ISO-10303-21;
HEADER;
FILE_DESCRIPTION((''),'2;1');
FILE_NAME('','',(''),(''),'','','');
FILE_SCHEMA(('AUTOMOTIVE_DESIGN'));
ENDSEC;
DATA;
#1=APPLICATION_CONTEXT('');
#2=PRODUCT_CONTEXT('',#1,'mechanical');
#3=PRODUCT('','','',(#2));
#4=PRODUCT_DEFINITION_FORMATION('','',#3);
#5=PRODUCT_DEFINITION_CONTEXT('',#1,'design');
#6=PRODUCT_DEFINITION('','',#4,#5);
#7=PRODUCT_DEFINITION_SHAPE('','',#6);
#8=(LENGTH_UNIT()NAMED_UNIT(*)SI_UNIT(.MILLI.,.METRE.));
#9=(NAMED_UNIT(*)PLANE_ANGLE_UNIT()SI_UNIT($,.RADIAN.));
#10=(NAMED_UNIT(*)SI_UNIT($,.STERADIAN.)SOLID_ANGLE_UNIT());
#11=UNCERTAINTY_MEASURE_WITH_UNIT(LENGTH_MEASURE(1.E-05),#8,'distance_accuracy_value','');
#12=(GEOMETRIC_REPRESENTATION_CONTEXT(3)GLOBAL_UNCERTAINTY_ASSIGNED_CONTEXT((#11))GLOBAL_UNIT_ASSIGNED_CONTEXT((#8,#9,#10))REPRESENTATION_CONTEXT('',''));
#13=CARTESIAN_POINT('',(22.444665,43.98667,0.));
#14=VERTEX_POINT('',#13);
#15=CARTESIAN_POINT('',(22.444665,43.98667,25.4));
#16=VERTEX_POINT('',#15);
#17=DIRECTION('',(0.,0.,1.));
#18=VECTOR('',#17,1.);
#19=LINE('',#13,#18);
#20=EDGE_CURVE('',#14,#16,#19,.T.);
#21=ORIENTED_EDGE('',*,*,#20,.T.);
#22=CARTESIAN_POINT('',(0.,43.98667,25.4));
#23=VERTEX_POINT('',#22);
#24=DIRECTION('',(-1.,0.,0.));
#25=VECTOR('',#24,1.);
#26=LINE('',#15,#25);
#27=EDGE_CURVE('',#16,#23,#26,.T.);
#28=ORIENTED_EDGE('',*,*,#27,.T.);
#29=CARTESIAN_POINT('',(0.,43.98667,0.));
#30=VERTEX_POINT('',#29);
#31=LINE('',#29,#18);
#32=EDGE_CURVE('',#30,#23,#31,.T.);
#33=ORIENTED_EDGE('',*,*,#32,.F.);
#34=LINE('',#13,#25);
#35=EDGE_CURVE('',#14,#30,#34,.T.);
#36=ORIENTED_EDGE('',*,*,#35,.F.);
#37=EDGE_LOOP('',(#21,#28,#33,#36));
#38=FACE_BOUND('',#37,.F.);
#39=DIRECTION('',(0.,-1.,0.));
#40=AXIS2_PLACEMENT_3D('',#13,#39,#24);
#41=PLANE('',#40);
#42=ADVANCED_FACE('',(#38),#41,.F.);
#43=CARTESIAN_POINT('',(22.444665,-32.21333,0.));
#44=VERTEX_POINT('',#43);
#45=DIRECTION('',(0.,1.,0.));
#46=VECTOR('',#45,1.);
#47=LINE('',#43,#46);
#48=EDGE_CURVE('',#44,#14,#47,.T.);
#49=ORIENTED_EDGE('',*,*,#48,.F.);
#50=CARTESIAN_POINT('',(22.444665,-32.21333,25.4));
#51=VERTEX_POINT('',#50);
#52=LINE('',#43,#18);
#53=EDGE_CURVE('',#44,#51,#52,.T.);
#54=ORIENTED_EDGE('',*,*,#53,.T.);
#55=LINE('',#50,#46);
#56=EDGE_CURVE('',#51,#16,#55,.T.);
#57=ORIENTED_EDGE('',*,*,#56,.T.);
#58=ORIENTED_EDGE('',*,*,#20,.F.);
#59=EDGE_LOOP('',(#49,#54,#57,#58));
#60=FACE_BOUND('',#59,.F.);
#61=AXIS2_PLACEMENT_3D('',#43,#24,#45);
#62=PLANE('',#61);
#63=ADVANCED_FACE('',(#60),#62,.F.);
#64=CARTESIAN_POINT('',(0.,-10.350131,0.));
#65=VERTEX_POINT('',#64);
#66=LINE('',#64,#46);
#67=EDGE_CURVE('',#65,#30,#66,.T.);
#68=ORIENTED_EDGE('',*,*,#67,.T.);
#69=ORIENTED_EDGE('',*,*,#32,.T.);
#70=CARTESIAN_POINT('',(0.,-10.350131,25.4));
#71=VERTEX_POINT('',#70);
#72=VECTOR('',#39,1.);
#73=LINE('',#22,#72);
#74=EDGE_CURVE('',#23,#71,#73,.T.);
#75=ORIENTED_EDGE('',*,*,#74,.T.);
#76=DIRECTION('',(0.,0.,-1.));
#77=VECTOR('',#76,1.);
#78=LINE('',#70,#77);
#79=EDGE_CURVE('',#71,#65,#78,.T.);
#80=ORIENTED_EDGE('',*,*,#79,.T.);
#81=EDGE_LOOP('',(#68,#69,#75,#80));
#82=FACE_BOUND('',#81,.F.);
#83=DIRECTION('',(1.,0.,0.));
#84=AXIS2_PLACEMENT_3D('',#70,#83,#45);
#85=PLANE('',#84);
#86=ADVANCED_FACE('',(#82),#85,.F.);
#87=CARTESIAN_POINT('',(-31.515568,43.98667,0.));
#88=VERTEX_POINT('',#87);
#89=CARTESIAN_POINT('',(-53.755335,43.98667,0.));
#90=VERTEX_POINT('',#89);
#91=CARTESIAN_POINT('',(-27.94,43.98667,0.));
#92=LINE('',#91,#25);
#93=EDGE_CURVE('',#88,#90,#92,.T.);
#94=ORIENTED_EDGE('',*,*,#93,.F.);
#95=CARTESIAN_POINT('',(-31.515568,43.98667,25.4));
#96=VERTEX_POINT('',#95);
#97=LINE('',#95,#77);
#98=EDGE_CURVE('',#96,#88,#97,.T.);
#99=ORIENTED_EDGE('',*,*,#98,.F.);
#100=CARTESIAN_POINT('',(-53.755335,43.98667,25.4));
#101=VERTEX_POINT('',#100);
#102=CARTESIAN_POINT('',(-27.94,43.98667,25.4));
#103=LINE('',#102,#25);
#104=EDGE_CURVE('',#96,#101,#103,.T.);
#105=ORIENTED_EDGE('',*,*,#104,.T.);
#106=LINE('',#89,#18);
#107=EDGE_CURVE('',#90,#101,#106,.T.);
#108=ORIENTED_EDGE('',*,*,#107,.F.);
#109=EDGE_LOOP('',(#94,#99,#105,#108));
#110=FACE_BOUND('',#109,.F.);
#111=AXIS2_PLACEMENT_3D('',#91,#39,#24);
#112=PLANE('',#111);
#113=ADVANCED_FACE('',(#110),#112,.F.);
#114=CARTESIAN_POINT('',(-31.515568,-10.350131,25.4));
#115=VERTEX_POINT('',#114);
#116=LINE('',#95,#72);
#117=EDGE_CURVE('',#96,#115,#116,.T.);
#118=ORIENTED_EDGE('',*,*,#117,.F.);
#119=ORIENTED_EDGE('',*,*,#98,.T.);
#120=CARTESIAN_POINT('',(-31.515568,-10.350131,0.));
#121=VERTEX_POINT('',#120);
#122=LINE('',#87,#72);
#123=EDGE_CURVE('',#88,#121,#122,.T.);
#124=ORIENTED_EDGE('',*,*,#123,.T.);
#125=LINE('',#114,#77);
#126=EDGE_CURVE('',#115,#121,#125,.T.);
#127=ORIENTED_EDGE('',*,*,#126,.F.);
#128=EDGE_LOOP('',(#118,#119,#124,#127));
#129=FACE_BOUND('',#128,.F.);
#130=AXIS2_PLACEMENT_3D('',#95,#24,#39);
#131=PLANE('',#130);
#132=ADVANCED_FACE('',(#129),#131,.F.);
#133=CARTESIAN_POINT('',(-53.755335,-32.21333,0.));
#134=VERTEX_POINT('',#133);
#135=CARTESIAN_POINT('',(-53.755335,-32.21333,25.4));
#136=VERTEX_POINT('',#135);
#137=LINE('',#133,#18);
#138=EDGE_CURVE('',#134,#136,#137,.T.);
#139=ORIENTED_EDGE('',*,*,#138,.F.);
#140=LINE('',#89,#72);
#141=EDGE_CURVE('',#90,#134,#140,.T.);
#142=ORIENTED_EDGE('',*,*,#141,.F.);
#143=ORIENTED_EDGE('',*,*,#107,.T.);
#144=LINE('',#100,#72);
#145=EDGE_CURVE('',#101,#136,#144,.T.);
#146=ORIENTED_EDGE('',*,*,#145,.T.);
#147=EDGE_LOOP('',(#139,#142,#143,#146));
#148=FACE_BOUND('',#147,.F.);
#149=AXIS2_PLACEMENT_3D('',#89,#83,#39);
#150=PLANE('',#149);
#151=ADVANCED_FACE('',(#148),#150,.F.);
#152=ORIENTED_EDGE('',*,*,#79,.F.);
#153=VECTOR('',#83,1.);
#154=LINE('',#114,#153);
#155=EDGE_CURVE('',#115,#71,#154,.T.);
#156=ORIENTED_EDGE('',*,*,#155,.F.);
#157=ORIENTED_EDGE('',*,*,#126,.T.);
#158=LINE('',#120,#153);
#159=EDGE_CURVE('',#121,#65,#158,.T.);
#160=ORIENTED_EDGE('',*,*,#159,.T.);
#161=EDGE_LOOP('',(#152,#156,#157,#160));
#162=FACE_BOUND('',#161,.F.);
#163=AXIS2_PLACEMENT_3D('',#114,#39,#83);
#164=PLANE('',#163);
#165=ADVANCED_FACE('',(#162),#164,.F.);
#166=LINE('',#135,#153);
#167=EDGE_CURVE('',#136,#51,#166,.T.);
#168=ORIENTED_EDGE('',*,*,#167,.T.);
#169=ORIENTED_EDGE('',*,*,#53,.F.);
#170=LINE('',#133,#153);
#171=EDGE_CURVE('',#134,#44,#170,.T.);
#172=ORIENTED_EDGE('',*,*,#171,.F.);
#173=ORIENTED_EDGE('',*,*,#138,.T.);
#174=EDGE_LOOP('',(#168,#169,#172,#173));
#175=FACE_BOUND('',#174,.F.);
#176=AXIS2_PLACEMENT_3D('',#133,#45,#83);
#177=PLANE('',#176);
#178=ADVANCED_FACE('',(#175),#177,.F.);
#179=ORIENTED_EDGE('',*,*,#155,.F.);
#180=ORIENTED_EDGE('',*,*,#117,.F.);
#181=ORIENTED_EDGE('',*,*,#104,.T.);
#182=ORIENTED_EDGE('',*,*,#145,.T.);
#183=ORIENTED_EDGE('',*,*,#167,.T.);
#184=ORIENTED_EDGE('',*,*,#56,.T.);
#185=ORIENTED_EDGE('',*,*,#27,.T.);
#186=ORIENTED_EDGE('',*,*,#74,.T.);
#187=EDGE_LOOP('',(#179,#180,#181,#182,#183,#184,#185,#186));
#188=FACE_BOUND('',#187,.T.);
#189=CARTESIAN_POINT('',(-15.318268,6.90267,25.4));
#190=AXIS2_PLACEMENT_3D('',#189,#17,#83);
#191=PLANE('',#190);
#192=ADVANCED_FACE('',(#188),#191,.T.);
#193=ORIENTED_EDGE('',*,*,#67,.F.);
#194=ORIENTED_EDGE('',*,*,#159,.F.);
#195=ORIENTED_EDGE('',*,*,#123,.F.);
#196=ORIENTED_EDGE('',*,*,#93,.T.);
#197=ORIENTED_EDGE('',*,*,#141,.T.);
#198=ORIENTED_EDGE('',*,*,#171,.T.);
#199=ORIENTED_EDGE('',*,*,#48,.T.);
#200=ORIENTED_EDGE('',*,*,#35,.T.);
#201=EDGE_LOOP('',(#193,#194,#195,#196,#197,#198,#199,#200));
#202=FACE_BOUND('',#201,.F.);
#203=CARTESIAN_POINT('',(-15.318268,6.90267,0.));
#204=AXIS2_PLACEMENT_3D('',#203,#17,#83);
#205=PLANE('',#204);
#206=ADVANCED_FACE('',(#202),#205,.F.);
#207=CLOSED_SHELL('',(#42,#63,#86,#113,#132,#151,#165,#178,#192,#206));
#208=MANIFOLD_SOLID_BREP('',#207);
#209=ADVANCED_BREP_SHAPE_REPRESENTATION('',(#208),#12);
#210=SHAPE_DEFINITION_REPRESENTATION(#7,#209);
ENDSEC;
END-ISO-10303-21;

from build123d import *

# Parameters (mm, degrees)
F1_DEPTH = 25.4
F3_DEPTH = 25.4


# Not quite as in the source:
# - a feature names something its author has since deleted; it is built from what else it names


with BuildPart() as f1:
    # F0 (on Top) → F1 (new body)
    with BuildSketch(Plane.XY):
        Polygon((-27.94, 43.9866697311), (-53.755334568, 43.9866697311), (-53.755334568, -32.2133302689), (22.444665432, -32.2133302689), (22.444665432, 43.9866697311), (0, 43.9866697311), (0, 5.8866697311), (-27.94, 5.8866697311), align=None)
    extrude(amount=F1_DEPTH)

    # F2 (on face) → F3 (cut)
    with BuildSketch(Plane.XY.offset(25.4)):
        Polygon((-27.94, 43.9866697311), (-31.5155684948, 43.9866697311), (-31.5155684948, 0), (-31.5155684948, -10.3501314297), (0, -10.3501314297), (0, 5.8866697311), (-27.94, 5.8866697311), align=None)
    extrude(amount=-F3_DEPTH, mode=Mode.SUBTRACT)


solid = f1.part
